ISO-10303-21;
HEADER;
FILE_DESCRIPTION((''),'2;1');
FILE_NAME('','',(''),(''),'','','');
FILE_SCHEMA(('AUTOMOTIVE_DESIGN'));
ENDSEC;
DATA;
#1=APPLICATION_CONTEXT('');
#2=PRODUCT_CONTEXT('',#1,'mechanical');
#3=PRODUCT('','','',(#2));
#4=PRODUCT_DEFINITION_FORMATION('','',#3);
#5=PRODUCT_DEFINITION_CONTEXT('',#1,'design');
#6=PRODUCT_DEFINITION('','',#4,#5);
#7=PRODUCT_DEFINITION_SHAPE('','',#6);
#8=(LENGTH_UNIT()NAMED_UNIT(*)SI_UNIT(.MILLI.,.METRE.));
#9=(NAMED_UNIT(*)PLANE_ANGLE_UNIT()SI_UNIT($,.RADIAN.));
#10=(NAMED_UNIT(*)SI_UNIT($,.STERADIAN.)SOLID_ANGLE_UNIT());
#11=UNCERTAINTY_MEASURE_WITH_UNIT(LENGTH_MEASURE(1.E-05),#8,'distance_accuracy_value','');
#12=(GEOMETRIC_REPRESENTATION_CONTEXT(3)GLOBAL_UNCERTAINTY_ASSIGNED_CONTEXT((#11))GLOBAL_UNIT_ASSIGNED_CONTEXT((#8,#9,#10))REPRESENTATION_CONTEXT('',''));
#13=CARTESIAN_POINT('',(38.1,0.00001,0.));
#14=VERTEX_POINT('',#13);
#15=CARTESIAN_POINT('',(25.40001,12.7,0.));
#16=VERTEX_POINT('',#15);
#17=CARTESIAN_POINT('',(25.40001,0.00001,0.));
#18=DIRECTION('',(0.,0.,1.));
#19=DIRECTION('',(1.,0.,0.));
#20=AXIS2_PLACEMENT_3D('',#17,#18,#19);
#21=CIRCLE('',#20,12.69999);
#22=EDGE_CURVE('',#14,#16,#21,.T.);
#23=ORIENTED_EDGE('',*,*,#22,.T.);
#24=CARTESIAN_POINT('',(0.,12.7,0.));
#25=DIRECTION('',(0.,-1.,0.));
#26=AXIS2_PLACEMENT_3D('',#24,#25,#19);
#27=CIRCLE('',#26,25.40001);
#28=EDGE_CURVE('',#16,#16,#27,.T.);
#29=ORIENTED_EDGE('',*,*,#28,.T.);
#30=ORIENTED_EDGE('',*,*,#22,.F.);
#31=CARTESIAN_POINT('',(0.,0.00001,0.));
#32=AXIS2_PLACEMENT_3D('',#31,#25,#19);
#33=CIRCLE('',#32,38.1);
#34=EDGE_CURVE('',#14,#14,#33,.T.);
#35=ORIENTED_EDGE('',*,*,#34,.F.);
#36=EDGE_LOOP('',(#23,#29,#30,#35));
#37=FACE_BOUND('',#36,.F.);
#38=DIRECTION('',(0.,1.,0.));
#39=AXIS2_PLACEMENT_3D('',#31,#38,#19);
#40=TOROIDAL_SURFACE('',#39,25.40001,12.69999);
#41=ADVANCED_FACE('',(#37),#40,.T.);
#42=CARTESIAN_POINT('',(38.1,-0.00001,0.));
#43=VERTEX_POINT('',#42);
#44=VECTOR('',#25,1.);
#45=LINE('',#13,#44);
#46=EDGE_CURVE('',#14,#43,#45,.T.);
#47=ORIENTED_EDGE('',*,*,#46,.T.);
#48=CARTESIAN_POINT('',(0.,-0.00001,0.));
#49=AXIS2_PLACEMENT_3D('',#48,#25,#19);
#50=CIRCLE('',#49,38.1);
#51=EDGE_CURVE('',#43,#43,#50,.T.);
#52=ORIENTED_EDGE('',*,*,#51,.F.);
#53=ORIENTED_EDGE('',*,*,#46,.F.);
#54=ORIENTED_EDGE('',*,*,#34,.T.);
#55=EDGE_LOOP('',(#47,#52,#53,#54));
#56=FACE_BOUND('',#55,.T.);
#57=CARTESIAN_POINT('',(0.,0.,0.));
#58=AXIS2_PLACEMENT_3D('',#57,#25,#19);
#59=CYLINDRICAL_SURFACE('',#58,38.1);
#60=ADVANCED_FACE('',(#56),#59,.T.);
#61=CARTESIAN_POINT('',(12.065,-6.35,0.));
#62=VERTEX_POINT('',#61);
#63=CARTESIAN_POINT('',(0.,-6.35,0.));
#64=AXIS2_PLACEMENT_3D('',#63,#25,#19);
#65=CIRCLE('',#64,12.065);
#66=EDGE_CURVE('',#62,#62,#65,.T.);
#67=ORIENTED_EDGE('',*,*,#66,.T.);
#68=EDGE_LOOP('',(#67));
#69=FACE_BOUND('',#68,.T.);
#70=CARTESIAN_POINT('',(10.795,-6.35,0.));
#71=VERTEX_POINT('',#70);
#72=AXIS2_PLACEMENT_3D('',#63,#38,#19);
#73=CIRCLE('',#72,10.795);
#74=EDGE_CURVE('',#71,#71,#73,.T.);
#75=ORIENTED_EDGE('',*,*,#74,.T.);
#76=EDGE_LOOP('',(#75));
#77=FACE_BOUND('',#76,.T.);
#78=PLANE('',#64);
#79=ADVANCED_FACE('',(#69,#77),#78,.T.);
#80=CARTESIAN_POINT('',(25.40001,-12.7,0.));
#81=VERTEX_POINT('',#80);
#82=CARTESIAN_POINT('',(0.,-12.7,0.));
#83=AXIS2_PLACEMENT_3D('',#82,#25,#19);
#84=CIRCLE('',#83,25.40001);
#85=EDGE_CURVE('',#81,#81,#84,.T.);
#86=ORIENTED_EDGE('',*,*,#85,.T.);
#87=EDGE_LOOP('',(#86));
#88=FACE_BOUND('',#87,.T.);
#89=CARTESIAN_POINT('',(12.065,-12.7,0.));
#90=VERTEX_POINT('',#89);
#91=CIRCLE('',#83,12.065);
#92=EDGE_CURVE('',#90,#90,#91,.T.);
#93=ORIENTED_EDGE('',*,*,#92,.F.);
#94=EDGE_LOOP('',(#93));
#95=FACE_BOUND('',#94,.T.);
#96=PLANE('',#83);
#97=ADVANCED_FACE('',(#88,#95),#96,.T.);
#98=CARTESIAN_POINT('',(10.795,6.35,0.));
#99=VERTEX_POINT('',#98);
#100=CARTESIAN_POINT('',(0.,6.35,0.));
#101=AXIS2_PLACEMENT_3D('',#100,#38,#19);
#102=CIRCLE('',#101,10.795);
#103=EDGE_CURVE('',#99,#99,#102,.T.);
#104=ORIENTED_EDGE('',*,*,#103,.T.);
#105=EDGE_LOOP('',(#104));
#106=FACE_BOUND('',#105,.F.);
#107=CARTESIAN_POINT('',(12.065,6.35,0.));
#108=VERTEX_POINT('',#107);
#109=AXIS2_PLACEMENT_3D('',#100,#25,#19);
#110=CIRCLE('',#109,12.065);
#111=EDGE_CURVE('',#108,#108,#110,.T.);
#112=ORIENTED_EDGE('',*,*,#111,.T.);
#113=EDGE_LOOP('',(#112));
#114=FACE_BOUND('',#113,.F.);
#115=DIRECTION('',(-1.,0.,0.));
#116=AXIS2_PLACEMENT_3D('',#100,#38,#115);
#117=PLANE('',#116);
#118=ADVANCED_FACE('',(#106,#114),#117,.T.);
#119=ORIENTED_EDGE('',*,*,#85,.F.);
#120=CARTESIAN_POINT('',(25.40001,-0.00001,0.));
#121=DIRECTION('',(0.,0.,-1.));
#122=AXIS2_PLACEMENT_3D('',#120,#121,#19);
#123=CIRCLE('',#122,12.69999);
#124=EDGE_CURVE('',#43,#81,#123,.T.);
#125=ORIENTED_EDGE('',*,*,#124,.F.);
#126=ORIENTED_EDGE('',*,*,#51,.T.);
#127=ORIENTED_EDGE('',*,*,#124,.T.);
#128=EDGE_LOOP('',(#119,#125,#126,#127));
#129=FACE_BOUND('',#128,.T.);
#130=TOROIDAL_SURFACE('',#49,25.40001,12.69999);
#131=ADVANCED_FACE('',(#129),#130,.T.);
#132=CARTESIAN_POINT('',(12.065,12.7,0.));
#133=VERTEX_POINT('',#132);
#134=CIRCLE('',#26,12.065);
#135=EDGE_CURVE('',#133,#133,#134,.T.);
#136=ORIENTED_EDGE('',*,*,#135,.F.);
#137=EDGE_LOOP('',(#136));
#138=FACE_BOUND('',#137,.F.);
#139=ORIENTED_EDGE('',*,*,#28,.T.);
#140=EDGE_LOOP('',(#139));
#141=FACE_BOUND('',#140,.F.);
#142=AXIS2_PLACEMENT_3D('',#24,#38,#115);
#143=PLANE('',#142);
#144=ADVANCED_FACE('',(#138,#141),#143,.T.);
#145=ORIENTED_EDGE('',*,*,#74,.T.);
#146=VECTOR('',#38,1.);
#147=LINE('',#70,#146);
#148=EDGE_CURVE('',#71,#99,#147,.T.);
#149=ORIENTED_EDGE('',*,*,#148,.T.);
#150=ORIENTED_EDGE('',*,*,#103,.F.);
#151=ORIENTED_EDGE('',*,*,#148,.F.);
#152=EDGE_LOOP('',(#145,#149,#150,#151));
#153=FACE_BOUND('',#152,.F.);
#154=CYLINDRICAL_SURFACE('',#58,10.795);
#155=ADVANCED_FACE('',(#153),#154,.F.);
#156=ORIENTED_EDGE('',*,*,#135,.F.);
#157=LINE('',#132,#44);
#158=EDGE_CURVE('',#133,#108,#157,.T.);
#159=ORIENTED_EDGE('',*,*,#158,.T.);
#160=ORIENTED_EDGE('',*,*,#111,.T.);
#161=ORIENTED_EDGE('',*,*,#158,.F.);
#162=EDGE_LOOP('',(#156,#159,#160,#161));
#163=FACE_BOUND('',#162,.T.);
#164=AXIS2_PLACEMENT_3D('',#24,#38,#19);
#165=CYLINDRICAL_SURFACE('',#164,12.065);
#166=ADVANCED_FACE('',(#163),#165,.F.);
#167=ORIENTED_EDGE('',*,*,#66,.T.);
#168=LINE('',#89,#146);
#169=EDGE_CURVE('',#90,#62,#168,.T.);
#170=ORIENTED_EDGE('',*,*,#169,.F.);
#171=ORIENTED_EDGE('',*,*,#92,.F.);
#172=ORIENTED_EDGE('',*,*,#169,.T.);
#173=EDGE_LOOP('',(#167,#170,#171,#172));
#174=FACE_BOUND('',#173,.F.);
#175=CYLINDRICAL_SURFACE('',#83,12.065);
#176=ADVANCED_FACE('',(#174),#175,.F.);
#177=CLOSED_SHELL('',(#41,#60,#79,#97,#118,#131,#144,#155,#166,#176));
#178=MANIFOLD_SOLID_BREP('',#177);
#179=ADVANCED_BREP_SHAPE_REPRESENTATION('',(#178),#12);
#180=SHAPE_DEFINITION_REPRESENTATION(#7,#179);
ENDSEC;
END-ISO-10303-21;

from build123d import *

# Parameters (mm, degrees)
F0_R     = 38.1
F1_DEPTH = 12.7
F2_R     = 12.69999
F3_R     = 10.795
F4_DEPTH = 25.4
F6_R     = 12.065
F7_DEPTH = 6.35


# Not quite as in the source:
# - a fillet or chamfer is up to 0.001 mm smaller than in the source, because OpenCascade refuses the exact size


with BuildPart() as f1:
    # F0 (on Front) → F1 (new body)
    with BuildSketch(Plane.XZ):
        Circle(F0_R)
    extrude(amount=F1_DEPTH)

    # F2 (radius 12.7 in the source; OpenCascade refuses exactly that, so slightly less here)
    f2_edges = [f1.edges().sort_by_distance(p)[0] for p in [
        (-38.1, -12.7, 0),
    ]]
    fillet(f2_edges, radius=F2_R)

    # F3 (on Front) → F4 (cut)
    with BuildSketch(Plane.XZ):
        Circle(F3_R)
    extrude(amount=F4_DEPTH, mode=Mode.SUBTRACT)

    # F6 (on offset) → F7 (cut)
    with BuildSketch(Plane.XZ.offset(12.7)):
        Circle(F6_R)
    extrude(amount=-F7_DEPTH, mode=Mode.SUBTRACT)

    # F8: F1 across plane


with BuildPart() as f1_1:
    add(f1.part)
    add(f1.part.mirror(Plane.XZ))


solid = f1_1.part
